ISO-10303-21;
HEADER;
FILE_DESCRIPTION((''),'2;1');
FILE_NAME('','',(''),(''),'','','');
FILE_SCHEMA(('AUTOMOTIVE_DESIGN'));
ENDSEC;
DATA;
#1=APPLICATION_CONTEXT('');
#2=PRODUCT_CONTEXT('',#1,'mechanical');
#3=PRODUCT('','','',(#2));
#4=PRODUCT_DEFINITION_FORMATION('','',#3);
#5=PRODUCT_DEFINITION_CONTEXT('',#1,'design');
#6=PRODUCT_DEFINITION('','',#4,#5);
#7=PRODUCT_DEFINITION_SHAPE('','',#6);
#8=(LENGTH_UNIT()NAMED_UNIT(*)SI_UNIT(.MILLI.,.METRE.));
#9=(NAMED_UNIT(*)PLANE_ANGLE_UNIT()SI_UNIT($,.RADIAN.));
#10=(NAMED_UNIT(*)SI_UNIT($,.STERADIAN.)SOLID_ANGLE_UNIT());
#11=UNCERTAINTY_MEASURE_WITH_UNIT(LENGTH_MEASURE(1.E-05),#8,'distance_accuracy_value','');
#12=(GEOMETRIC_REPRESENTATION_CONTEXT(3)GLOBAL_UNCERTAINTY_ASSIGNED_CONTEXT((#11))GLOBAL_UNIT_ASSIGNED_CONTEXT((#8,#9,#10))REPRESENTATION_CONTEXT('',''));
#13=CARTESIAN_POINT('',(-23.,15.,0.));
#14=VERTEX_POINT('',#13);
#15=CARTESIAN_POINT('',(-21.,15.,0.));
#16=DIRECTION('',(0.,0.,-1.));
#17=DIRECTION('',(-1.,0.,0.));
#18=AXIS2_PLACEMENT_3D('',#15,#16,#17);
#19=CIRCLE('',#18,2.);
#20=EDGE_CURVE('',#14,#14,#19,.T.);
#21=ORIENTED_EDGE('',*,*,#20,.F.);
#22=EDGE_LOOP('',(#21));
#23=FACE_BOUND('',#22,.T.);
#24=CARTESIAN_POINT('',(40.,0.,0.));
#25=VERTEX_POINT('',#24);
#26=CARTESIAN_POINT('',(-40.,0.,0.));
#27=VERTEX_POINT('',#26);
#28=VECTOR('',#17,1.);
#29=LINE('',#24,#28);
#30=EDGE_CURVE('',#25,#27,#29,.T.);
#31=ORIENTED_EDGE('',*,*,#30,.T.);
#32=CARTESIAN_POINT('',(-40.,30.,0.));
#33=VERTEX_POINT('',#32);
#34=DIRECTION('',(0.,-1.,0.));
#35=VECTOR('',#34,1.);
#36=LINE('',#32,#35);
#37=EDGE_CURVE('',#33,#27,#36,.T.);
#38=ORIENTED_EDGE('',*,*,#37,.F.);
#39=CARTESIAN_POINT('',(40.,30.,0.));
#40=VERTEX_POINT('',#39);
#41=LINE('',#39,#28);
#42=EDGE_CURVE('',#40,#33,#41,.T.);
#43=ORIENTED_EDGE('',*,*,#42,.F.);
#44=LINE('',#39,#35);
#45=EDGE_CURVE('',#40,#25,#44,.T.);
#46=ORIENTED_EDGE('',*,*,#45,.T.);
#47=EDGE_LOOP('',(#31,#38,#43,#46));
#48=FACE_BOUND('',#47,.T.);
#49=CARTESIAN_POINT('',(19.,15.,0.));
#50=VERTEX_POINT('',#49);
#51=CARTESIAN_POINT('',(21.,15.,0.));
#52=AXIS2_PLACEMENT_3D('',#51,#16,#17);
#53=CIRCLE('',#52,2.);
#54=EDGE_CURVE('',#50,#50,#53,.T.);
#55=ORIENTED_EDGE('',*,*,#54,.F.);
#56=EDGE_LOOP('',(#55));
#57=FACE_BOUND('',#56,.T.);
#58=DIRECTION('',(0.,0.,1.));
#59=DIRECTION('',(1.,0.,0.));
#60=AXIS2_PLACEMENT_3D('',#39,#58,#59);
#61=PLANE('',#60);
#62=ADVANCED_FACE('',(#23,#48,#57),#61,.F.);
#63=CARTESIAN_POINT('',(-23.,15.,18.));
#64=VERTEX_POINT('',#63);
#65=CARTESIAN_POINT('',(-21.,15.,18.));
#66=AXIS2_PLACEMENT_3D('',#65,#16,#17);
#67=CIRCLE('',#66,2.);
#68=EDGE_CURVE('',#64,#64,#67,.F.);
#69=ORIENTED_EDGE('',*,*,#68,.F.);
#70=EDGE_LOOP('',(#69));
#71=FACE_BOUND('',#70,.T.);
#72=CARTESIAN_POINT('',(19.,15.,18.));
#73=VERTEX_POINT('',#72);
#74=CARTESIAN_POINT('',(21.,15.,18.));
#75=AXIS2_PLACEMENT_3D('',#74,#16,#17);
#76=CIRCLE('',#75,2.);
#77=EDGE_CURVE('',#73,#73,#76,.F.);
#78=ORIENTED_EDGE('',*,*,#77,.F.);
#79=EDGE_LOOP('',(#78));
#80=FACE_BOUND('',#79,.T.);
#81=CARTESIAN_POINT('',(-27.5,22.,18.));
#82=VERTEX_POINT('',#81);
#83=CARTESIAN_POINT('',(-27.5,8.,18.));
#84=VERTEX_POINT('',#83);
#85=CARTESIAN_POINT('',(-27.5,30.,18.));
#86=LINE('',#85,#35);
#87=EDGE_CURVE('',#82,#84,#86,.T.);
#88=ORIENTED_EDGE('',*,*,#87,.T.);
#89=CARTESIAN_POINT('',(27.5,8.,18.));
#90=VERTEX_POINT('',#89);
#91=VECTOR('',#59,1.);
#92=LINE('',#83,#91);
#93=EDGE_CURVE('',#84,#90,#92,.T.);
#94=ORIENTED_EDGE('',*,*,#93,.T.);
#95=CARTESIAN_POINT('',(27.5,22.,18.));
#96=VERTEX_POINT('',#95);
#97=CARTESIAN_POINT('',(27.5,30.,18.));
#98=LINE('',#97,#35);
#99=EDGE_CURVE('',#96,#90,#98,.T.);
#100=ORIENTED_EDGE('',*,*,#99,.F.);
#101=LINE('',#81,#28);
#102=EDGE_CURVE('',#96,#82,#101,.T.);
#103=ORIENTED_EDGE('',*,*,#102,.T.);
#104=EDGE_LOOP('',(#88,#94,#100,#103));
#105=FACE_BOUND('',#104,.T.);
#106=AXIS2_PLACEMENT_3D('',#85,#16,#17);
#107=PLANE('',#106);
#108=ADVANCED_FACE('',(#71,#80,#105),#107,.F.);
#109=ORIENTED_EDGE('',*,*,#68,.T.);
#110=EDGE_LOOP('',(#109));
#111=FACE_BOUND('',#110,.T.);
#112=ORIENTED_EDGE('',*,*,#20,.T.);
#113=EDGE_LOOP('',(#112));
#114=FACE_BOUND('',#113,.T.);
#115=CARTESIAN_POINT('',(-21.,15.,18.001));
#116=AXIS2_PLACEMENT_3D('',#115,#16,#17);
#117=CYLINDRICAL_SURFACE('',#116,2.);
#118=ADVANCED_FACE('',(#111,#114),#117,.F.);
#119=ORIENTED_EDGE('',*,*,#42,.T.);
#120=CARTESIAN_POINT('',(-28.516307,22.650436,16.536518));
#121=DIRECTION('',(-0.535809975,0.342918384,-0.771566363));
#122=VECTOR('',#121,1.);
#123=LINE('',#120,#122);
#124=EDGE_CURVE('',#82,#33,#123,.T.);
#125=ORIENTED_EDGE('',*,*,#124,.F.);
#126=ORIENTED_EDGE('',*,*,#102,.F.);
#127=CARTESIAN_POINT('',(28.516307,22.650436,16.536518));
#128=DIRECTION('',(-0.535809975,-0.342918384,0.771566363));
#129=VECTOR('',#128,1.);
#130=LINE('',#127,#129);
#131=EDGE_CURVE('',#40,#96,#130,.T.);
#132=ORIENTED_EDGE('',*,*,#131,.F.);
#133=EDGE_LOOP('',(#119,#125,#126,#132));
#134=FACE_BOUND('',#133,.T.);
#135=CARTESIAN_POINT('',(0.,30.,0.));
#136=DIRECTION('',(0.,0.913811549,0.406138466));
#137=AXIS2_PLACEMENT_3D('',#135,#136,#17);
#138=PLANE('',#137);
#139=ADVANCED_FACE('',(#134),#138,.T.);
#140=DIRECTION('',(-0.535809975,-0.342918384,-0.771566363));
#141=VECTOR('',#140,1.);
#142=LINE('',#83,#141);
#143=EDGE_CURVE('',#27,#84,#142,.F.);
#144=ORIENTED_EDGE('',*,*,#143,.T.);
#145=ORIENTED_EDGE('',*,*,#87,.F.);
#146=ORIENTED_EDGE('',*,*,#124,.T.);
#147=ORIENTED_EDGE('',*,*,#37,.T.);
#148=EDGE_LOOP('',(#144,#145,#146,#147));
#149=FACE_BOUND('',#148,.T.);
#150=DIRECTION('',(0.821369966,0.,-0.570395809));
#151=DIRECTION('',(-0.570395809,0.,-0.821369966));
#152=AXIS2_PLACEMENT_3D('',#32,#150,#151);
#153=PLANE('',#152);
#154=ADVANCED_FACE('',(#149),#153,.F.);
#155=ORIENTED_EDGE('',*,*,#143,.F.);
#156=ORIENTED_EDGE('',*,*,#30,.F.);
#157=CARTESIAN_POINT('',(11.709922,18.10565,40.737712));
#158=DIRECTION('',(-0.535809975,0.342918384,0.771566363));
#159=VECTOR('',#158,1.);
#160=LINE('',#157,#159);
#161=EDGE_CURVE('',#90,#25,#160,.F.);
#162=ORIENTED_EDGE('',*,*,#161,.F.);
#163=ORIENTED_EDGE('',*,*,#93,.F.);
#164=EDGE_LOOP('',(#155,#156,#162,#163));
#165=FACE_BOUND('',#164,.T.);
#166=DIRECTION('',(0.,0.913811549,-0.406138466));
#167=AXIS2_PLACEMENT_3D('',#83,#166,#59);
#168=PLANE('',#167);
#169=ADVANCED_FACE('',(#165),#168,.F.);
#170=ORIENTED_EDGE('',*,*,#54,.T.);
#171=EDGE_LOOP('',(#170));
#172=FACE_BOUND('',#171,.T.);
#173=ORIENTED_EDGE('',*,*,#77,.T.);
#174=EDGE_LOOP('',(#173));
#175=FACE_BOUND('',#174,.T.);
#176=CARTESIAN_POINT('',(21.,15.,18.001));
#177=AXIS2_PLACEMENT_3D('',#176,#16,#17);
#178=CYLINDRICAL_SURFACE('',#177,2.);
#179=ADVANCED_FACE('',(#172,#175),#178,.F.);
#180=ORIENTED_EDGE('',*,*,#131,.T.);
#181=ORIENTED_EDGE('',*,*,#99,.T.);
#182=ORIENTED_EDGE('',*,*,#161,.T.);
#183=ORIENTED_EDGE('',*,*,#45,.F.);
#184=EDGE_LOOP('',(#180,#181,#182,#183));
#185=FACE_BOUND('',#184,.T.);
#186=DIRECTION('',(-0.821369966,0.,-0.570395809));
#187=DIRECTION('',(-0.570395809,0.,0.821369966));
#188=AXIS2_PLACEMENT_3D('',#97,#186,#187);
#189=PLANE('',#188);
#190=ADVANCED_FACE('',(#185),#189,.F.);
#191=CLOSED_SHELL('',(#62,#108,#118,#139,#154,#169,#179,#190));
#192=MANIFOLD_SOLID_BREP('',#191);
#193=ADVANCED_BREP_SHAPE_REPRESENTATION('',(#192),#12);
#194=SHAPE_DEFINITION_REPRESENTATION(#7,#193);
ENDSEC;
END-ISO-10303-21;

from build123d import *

# Parameters (mm, degrees)
DODANIE_WYCI_GNI_CIE1_DEPTH = 30
WYTNIJ_WYCI_GNI_CIE1_REACH  = 55.141
SZKIC2_R                    = 2
SFAZOWANIE1_SIZE            = 8
SFAZOWANIE1_SIZE_2          = 18
SFAZOWANIE2_SIZE            = 8
SFAZOWANIE2_SIZE_2          = 18


with BuildPart() as part:
    # Szkic1 → Dodanie-wyciągnięcie1 (new body)
    with BuildSketch(Plane(origin=(0, 0, 0), x_dir=(1, 0, 0), z_dir=(0, 1, 0))):
        Polygon((-40, 0), (-27.5, -18), (27.5, -18), (40, 0), align=None)
    extrude(amount=DODANIE_WYCI_GNI_CIE1_DEPTH)

    # Szkic2 → Wytnij-wyciągnięcie1 (cut, up to next)
    with BuildSketch(Plane(origin=(0, 0, 0), x_dir=(-1, 0, 0), z_dir=(0, 0, -1)), mode=Mode.PRIVATE) as wytnij_wyci_gni_cie1_sk1:
        with Locations((-21, 15)):
            Circle(SZKIC2_R)
    wytnij_wyci_gni_cie1_tool1 = extrude(wytnij_wyci_gni_cie1_sk1.sketch, amount=-WYTNIJ_WYCI_GNI_CIE1_REACH, mode=Mode.PRIVATE) & part.part
    # Szkic2 → Wytnij-wyciągnięcie1 (cut, up to next)
    with BuildSketch(Plane(origin=(0, 0, 0), x_dir=(-1, 0, 0), z_dir=(0, 0, -1)), mode=Mode.PRIVATE) as wytnij_wyci_gni_cie1_sk2:
        with Locations((21, 15)):
            Circle(SZKIC2_R)
    wytnij_wyci_gni_cie1_tool2 = extrude(wytnij_wyci_gni_cie1_sk2.sketch, amount=-WYTNIJ_WYCI_GNI_CIE1_REACH, mode=Mode.PRIVATE) & part.part
    add(wytnij_wyci_gni_cie1_tool1.solids().sort_by_distance((21, 15, 0))[0], mode=Mode.SUBTRACT)
    add(wytnij_wyci_gni_cie1_tool2.solids().sort_by_distance((-21, 15, 0))[0], mode=Mode.SUBTRACT)

    # Sfazowanie1
    # the kernel refuses this chamfer: 18, 8 mm, written as the material it takes off along each edge
    with BuildSketch(Plane(origin=(-74.15058918, 0, 18), x_dir=(0, 0.996867139056945, 0.0790942922619672), z_dir=(1, 0, 0))) as sfazowanie1_piece_1:
        Polygon((SFAZOWANIE1_SIZE * 0.996867139057, -SFAZOWANIE1_SIZE * 0.079094292262), (-SFAZOWANIE1_SIZE_2 * 0.079094292262, -SFAZOWANIE1_SIZE_2 * 0.996867139057), (0, 0), align=None)
    extrude(amount=148.301178361, mode=Mode.SUBTRACT)

    # Sfazowanie2
    # the kernel refuses this chamfer: 18, 8 mm, written as the material it takes off along each edge
    with BuildSketch(Plane(origin=(-74.15058918, 30, 18), x_dir=(0, -0.996867139056945, 0.0790942922619672), z_dir=(1, 0, 0))) as sfazowanie2_piece_1:
        Polygon((SFAZOWANIE2_SIZE * 0.996867139057, SFAZOWANIE2_SIZE * 0.079094292262), (-SFAZOWANIE2_SIZE_2 * 0.079094292262, SFAZOWANIE2_SIZE_2 * 0.996867139057), (0, 0), align=None)
    extrude(amount=148.301178361, mode=Mode.SUBTRACT)


solid = part.part
